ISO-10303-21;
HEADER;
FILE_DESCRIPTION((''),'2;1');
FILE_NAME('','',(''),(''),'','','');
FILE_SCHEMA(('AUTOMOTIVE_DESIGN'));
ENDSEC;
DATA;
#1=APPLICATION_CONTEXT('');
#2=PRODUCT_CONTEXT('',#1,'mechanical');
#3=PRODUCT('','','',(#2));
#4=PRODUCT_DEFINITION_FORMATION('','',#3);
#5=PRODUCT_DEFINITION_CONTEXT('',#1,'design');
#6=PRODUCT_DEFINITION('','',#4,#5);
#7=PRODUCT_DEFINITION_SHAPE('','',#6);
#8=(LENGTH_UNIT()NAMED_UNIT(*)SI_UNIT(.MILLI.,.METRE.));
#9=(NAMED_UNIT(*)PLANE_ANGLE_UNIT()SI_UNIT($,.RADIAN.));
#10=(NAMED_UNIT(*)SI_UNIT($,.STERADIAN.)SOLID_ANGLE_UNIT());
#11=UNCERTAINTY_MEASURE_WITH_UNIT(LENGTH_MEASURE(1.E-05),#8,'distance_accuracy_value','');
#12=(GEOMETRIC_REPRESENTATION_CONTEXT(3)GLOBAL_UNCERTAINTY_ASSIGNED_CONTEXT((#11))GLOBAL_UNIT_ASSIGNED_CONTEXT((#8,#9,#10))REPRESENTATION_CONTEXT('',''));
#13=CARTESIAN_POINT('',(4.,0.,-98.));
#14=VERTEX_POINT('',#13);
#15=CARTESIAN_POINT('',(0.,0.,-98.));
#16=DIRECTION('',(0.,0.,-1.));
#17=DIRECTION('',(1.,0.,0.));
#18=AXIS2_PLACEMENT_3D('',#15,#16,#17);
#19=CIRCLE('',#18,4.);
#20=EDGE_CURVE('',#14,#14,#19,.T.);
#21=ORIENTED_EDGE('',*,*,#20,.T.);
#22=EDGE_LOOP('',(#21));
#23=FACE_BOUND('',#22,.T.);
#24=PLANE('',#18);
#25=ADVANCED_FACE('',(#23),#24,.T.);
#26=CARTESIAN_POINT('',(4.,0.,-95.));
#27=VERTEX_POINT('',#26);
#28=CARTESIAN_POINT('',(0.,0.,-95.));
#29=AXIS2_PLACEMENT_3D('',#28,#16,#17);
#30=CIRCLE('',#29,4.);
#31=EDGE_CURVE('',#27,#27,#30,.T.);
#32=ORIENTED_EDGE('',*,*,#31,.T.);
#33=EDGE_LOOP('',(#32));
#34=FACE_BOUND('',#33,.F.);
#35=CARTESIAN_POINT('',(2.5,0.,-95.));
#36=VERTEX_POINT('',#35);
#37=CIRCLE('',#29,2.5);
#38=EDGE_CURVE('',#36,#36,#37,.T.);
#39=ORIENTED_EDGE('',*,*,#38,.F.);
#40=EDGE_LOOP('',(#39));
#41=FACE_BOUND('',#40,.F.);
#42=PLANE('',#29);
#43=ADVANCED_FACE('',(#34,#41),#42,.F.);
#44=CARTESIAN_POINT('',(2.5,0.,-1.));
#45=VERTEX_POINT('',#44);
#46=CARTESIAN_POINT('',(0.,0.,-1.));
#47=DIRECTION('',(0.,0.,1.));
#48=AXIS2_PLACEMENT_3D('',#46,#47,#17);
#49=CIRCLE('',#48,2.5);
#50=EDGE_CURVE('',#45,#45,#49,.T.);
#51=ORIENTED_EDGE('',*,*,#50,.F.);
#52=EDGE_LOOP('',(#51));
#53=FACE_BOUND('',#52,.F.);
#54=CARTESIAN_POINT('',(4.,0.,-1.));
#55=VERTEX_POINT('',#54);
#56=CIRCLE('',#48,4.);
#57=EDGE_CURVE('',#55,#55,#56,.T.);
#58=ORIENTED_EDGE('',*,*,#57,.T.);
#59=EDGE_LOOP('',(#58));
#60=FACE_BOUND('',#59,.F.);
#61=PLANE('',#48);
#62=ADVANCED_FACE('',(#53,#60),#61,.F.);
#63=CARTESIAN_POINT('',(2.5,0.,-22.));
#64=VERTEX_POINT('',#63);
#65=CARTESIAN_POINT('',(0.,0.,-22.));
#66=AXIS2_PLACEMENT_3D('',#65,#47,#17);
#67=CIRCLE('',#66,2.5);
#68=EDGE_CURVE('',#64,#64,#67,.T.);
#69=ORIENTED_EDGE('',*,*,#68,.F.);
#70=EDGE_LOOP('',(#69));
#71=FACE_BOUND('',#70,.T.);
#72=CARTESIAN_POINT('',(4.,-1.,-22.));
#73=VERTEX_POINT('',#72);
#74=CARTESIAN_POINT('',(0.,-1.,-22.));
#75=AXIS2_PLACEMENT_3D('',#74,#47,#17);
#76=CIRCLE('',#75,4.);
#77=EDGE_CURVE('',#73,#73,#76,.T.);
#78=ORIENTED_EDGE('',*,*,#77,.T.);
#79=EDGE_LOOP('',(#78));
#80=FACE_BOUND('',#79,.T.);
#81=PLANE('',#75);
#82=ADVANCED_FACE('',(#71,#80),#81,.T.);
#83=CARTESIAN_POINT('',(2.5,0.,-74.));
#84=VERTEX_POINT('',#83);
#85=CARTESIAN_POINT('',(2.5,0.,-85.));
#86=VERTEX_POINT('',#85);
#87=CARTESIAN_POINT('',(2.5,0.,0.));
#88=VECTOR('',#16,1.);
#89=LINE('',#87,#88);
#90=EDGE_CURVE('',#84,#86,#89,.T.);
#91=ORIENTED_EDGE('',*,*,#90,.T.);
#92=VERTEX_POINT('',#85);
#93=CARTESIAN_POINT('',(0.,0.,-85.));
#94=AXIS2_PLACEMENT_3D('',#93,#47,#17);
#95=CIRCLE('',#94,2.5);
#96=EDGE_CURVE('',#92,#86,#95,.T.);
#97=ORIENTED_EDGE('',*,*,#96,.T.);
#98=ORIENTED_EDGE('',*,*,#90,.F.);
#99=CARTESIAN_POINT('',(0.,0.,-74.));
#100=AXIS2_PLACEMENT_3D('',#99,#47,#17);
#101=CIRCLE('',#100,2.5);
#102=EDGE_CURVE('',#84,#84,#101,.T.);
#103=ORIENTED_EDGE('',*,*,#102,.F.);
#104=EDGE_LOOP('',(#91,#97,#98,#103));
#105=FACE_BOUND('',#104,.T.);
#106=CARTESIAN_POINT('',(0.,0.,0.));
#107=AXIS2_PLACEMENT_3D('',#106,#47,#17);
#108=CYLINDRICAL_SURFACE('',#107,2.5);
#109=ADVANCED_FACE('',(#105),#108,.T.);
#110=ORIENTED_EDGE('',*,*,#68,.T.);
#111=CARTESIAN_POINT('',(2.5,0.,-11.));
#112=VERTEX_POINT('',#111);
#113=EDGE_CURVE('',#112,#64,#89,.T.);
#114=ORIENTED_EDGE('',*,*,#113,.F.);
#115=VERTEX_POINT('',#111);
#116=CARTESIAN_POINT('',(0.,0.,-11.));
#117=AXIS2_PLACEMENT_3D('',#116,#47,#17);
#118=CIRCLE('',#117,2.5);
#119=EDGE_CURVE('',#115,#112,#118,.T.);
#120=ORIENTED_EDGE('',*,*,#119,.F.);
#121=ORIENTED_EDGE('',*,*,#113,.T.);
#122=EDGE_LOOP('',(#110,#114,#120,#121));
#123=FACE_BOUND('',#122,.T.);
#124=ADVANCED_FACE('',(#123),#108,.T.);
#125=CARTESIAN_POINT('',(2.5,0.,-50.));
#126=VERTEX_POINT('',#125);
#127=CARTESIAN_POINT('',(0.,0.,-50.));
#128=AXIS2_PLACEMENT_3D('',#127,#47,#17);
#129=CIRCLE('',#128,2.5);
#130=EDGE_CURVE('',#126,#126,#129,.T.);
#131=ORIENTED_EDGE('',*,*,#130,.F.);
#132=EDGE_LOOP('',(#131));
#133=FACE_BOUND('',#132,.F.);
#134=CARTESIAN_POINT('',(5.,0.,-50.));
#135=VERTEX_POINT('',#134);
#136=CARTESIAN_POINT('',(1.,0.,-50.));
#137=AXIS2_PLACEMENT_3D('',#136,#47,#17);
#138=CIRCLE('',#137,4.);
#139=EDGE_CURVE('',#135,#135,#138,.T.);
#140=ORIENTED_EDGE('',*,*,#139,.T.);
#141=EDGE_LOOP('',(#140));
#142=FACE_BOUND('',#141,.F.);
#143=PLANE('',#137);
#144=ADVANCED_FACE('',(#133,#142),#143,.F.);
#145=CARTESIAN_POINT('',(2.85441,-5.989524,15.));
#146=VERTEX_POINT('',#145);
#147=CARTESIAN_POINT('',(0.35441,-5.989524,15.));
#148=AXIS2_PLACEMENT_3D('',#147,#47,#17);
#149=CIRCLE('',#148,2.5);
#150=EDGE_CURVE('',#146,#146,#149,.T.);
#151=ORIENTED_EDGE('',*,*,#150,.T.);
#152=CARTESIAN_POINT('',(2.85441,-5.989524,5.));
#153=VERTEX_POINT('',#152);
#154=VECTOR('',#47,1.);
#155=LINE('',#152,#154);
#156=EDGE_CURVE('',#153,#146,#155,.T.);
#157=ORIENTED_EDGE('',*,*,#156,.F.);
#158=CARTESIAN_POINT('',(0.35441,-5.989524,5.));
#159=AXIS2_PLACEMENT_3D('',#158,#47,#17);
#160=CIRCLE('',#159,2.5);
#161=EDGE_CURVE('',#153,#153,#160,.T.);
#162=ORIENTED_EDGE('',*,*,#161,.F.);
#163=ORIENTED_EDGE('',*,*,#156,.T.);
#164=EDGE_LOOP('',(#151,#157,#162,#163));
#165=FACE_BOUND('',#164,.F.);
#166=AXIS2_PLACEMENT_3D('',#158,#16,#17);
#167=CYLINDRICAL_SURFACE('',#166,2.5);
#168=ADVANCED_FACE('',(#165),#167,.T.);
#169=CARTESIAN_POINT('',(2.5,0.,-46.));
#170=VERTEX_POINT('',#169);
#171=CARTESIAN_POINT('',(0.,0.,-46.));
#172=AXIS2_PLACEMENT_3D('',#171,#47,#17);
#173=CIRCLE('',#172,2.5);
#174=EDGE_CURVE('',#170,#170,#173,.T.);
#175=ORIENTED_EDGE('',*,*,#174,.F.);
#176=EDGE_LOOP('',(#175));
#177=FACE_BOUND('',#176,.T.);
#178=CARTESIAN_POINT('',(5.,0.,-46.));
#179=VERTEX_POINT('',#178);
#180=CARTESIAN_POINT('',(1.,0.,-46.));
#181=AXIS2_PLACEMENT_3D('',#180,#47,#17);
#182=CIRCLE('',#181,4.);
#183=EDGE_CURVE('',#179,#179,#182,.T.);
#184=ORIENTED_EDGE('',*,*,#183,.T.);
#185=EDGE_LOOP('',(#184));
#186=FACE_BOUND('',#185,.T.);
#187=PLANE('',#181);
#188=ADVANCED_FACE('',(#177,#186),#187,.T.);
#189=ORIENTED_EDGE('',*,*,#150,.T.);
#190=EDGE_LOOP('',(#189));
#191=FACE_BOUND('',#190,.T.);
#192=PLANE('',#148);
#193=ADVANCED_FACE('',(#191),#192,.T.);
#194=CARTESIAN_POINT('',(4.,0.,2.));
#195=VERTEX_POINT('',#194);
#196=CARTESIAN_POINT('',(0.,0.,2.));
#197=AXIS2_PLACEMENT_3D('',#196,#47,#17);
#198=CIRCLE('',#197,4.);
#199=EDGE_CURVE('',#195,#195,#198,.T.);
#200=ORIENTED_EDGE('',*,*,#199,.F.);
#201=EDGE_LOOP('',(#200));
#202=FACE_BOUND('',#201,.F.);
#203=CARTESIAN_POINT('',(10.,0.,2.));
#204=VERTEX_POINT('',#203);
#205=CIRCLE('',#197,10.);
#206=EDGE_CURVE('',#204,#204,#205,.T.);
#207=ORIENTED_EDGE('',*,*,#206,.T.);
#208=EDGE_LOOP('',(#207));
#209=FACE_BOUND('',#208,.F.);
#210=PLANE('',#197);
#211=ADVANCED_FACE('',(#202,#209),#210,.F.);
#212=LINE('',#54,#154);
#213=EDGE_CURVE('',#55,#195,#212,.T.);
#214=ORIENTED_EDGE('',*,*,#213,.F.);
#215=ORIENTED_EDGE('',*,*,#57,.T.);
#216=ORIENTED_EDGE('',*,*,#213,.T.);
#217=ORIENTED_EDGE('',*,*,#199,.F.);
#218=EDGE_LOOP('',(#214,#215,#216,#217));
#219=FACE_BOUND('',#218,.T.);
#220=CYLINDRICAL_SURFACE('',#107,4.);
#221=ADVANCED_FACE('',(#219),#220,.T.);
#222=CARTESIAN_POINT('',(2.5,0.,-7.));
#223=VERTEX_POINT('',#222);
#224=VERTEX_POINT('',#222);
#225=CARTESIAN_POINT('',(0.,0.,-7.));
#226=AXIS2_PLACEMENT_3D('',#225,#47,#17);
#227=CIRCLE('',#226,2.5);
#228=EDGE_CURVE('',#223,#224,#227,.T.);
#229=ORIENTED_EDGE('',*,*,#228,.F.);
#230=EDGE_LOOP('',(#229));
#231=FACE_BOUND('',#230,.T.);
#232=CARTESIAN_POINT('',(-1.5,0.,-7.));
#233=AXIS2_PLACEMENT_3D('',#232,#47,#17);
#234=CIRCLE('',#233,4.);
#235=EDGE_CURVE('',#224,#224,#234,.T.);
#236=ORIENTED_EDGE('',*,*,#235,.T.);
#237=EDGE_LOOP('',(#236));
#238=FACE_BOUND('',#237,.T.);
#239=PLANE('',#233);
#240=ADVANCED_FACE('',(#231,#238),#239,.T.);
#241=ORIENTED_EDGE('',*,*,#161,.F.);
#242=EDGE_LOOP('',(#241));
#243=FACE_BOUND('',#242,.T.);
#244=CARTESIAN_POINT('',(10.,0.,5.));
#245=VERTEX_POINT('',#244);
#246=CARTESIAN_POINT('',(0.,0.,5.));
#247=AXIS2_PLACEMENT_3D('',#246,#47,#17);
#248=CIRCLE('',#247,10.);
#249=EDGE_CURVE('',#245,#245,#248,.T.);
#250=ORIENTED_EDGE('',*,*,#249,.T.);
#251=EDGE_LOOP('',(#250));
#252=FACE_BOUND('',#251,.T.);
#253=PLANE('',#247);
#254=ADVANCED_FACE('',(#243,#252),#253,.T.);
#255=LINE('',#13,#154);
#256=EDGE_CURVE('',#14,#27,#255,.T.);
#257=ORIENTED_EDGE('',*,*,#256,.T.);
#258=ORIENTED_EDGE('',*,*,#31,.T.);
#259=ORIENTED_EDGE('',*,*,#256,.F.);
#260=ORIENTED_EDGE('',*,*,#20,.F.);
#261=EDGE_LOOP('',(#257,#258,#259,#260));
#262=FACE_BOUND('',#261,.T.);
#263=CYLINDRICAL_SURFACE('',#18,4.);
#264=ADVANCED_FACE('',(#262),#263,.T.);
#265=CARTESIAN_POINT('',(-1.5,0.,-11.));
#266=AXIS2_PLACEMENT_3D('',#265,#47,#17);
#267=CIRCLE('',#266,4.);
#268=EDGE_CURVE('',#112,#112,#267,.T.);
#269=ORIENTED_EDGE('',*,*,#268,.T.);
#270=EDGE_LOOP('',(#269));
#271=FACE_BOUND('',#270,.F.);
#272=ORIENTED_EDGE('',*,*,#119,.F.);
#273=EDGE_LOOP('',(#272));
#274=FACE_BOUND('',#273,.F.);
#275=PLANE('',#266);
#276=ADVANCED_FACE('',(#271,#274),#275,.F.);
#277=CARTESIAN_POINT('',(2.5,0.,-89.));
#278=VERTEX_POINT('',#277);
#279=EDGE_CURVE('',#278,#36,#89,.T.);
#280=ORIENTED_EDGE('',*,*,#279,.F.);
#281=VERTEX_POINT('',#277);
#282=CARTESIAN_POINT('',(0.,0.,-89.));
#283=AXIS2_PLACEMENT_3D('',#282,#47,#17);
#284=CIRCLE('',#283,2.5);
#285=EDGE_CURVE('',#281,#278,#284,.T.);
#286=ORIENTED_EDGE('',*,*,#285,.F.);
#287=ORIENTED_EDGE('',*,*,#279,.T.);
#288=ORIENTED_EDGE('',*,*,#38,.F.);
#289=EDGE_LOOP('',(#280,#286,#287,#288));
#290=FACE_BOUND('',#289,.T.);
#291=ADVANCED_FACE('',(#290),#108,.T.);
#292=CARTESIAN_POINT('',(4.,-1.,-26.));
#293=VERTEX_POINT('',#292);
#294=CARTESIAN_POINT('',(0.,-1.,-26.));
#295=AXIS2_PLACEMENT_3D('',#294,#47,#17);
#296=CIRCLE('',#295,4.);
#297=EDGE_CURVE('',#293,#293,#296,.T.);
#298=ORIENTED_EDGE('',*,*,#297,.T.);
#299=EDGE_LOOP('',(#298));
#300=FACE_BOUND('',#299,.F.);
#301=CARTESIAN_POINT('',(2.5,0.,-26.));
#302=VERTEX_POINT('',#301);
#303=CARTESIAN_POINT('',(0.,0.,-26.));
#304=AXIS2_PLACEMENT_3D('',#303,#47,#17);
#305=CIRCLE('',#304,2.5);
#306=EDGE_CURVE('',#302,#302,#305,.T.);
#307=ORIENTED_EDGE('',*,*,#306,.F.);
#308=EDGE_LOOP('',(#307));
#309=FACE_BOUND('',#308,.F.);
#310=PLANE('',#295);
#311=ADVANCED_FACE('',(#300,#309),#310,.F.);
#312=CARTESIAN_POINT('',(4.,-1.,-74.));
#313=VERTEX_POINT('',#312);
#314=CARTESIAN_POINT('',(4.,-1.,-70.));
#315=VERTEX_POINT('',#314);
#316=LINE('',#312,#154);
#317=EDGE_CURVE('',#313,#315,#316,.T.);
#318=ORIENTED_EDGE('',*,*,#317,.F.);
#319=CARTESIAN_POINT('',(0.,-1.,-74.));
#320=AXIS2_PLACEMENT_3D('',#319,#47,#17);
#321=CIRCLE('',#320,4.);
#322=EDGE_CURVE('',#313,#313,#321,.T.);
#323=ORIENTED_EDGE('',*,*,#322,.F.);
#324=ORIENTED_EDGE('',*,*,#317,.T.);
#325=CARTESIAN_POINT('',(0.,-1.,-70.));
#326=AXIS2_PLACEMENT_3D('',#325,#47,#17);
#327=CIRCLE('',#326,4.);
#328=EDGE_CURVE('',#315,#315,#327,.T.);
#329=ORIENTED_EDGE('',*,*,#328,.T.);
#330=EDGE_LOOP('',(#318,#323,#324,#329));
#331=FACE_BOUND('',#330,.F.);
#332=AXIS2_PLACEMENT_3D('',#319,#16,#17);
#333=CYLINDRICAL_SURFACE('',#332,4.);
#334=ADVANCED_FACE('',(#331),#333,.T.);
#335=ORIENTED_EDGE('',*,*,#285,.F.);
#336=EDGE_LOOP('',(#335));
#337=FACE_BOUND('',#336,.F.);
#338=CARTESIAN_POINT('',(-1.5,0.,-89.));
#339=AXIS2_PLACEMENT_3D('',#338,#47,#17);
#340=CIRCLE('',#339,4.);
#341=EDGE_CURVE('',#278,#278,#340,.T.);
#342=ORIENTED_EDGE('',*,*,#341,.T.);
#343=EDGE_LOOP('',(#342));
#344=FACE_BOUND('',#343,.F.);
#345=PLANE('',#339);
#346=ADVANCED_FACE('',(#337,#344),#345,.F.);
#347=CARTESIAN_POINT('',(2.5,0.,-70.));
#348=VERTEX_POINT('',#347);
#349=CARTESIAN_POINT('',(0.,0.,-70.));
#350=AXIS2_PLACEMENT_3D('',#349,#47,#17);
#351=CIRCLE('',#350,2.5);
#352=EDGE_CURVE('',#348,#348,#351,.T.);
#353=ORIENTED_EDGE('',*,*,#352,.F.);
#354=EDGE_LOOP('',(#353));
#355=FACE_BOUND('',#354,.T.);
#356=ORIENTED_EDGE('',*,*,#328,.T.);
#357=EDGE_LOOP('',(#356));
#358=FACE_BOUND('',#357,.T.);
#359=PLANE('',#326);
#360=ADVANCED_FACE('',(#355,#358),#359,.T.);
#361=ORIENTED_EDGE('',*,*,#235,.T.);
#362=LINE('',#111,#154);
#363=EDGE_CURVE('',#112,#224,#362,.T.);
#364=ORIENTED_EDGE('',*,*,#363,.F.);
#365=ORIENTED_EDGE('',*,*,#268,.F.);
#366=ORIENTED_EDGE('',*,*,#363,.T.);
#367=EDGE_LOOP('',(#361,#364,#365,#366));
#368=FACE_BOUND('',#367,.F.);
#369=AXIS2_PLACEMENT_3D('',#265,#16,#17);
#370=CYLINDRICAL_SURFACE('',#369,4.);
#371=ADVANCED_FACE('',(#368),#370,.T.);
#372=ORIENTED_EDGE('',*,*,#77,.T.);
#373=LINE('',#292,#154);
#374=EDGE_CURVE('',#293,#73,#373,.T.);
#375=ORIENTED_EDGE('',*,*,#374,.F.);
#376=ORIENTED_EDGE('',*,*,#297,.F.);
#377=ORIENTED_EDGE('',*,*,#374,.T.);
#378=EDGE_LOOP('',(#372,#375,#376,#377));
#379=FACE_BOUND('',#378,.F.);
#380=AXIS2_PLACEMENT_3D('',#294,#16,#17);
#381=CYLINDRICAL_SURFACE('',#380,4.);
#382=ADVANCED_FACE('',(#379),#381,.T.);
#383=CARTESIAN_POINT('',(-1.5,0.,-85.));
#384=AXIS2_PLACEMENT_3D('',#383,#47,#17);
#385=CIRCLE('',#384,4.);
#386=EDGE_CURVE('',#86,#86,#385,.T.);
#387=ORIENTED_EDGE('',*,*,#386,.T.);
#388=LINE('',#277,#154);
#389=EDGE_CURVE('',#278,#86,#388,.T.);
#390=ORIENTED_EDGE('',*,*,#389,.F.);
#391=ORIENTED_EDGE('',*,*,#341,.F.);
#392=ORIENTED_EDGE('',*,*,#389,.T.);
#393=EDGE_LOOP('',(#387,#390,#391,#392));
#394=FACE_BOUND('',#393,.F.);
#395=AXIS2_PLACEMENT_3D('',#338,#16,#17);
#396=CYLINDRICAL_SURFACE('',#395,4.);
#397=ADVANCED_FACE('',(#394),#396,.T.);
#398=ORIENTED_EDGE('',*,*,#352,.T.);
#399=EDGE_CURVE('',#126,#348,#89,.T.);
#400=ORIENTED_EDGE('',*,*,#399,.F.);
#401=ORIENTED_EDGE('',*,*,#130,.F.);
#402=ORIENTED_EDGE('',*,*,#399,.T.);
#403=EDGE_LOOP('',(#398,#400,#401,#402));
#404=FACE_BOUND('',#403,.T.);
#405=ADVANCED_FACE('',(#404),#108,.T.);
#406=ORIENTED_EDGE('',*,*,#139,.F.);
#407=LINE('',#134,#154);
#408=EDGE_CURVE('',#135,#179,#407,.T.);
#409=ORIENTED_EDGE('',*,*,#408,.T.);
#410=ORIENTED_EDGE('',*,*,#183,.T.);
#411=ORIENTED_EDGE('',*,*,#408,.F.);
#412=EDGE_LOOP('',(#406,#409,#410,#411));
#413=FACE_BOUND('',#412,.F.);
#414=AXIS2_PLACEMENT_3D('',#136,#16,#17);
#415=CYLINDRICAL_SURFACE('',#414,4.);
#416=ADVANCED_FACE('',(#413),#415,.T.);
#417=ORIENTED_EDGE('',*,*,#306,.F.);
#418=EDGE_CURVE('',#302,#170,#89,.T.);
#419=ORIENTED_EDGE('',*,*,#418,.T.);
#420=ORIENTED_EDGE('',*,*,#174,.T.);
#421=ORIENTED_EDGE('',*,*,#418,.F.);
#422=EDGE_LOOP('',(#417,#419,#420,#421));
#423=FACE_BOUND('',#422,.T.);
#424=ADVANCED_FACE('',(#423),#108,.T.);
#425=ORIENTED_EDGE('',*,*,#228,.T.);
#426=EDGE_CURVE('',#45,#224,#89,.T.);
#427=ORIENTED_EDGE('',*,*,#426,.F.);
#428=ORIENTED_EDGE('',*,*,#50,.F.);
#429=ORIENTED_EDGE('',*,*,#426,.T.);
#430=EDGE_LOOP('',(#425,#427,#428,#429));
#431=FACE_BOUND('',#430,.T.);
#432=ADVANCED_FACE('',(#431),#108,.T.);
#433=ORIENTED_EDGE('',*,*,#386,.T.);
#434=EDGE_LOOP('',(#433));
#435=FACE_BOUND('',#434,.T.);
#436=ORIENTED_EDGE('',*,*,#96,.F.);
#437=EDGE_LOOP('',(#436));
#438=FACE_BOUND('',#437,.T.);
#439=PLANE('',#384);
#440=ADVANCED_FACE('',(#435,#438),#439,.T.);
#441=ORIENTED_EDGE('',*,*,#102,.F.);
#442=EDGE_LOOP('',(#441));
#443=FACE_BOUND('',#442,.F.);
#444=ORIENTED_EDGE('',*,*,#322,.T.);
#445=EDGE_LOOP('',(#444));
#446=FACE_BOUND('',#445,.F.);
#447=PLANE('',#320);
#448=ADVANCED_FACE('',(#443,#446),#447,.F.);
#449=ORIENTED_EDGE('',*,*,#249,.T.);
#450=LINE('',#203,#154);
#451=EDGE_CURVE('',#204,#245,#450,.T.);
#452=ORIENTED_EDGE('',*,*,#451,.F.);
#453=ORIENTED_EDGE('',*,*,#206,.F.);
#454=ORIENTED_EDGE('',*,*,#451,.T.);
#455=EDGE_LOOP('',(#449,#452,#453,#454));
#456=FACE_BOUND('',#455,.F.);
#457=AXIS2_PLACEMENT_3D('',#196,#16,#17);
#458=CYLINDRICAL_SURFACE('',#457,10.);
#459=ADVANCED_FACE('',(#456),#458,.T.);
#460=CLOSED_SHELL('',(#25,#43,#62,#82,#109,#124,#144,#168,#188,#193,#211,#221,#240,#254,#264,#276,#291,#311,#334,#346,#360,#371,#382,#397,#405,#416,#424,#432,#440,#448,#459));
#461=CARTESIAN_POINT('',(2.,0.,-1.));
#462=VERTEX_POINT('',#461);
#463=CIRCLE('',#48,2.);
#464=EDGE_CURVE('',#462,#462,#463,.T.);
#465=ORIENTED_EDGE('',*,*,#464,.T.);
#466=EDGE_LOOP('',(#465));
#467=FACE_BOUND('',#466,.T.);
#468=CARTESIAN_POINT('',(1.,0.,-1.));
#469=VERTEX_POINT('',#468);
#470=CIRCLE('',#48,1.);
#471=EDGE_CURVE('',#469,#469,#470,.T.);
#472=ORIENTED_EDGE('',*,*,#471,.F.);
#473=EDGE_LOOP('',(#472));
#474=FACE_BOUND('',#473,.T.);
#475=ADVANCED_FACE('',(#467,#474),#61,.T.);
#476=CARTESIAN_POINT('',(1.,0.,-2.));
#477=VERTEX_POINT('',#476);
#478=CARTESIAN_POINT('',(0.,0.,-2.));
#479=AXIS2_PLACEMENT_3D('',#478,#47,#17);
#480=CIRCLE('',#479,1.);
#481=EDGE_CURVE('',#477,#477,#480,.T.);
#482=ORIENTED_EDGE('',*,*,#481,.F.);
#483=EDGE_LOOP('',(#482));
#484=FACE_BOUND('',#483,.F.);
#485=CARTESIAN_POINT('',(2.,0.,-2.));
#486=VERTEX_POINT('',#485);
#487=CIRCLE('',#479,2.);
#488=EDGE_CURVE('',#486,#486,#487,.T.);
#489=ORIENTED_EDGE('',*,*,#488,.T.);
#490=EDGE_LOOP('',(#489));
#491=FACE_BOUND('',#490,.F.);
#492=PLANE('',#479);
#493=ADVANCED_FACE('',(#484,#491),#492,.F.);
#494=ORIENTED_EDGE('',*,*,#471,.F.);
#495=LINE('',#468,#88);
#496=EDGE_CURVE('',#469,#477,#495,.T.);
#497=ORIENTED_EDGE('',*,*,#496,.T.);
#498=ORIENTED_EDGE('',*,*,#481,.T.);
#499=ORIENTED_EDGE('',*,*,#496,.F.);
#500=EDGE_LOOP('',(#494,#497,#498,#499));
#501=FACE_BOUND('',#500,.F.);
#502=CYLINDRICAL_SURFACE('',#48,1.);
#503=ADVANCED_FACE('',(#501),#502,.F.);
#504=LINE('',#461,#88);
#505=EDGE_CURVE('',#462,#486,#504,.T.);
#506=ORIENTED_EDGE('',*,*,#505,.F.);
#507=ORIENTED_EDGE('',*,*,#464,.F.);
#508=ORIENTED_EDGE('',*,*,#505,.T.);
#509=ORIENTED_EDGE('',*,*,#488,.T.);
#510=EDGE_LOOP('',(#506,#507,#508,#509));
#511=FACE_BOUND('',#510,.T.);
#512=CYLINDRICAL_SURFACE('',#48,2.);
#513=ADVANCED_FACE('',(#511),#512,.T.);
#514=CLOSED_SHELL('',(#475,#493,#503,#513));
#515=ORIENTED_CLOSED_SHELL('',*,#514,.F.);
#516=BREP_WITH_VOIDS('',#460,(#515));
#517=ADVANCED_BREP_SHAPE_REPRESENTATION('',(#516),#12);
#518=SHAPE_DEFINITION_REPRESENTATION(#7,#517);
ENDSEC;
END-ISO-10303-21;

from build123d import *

# Parameters (mm, degrees)
F0_R          = 4
F1_DEPTH      = 3
F1_DEPTH_BACK = 1
F2_R          = 2.5
F3_DEPTH      = 98
F5_R          = 4
F6_DEPTH      = 4
F8_R          = 4
F9_DEPTH      = 4
F11_R         = 4
F12_DEPTH     = 4
F14_R         = 4
F15_DEPTH     = 4
F17_R         = 4
F18_DEPTH     = 4
F20_START     = 2
F19_R         = 10
F20_DEPTH     = 3
F21_R         = 2.5
F22_DEPTH     = 10
F24_R         = 2
F24_R_2       = 1
F25_DEPTH     = 1
F26_R         = 4
F26_R_2       = 2.5
F27_DEPTH     = 3


# Not quite as in the source:
# - a feature names something its author has since deleted; it is built from what else it names


with BuildPart() as f1:
    # F0 (on Top) → F1 (new body, two sides)
    with BuildSketch(Plane.XY) as f1_sk:
        Circle(F0_R)
    extrude(amount=F1_DEPTH)
    extrude(f1_sk.sketch, amount=-F1_DEPTH_BACK)

    # F2 (on Top) → F3 (join)
    with BuildSketch(Plane.XY):
        Circle(F2_R)
    extrude(amount=-F3_DEPTH)

    # F5 (on offset) → F6 (join)
    with BuildSketch(Plane.XY.offset(-50)):
        with Locations((1, 0)):
            Circle(F5_R)
    extrude(amount=F6_DEPTH)

    # F8 (on offset) → F9 (join)
    with BuildSketch(Plane.XY.offset(-26)):
        with Locations((0, -1)):
            Circle(F8_R)
    extrude(amount=F9_DEPTH)

    # F11 (on offset) → F12 (join)
    with BuildSketch(Plane.XY.offset(-11)):
        with Locations((-1.5, 0)):
            Circle(F11_R)
    extrude(amount=F12_DEPTH)

    # F14 (on offset) → F15 (join)
    with BuildSketch(Plane.XY.offset(-74)):
        with Locations((0, -1)):
            Circle(F14_R)
    extrude(amount=F15_DEPTH)

    # F17 (on offset) → F18 (join)
    with BuildSketch(Plane.XY.offset(-89)):
        with Locations((-1.5, 0)):
            Circle(F17_R)
    extrude(amount=F18_DEPTH)

    # F19 (on Top) → F20 (join)
    with BuildSketch(Plane.XY.offset(F20_START)):
        Circle(F19_R)
    extrude(amount=F20_DEPTH)

    # F21 (on face) → F22 (join)
    with BuildSketch(Plane.XY.offset(5)):
        with Locations((0.3544102503, -5.989523635)):
            Circle(F21_R)
    extrude(amount=F22_DEPTH)

    # F24 (on offset) → F25 (cut)
    with BuildSketch(Plane.XY.offset(-1)):
        Circle(F24_R)
        Circle(F24_R_2, mode=Mode.SUBTRACT)
    extrude(amount=-F25_DEPTH, mode=Mode.SUBTRACT)

    # F26 (on face) → F27 (join)
    with BuildSketch(Plane(origin=(0, 0, -98), x_dir=(1, 0, 0), z_dir=(0, 0, -1))):
        Circle(F26_R)
        Circle(F26_R_2, mode=Mode.SUBTRACT)
    extrude(amount=-F27_DEPTH)


solid = f1.part
